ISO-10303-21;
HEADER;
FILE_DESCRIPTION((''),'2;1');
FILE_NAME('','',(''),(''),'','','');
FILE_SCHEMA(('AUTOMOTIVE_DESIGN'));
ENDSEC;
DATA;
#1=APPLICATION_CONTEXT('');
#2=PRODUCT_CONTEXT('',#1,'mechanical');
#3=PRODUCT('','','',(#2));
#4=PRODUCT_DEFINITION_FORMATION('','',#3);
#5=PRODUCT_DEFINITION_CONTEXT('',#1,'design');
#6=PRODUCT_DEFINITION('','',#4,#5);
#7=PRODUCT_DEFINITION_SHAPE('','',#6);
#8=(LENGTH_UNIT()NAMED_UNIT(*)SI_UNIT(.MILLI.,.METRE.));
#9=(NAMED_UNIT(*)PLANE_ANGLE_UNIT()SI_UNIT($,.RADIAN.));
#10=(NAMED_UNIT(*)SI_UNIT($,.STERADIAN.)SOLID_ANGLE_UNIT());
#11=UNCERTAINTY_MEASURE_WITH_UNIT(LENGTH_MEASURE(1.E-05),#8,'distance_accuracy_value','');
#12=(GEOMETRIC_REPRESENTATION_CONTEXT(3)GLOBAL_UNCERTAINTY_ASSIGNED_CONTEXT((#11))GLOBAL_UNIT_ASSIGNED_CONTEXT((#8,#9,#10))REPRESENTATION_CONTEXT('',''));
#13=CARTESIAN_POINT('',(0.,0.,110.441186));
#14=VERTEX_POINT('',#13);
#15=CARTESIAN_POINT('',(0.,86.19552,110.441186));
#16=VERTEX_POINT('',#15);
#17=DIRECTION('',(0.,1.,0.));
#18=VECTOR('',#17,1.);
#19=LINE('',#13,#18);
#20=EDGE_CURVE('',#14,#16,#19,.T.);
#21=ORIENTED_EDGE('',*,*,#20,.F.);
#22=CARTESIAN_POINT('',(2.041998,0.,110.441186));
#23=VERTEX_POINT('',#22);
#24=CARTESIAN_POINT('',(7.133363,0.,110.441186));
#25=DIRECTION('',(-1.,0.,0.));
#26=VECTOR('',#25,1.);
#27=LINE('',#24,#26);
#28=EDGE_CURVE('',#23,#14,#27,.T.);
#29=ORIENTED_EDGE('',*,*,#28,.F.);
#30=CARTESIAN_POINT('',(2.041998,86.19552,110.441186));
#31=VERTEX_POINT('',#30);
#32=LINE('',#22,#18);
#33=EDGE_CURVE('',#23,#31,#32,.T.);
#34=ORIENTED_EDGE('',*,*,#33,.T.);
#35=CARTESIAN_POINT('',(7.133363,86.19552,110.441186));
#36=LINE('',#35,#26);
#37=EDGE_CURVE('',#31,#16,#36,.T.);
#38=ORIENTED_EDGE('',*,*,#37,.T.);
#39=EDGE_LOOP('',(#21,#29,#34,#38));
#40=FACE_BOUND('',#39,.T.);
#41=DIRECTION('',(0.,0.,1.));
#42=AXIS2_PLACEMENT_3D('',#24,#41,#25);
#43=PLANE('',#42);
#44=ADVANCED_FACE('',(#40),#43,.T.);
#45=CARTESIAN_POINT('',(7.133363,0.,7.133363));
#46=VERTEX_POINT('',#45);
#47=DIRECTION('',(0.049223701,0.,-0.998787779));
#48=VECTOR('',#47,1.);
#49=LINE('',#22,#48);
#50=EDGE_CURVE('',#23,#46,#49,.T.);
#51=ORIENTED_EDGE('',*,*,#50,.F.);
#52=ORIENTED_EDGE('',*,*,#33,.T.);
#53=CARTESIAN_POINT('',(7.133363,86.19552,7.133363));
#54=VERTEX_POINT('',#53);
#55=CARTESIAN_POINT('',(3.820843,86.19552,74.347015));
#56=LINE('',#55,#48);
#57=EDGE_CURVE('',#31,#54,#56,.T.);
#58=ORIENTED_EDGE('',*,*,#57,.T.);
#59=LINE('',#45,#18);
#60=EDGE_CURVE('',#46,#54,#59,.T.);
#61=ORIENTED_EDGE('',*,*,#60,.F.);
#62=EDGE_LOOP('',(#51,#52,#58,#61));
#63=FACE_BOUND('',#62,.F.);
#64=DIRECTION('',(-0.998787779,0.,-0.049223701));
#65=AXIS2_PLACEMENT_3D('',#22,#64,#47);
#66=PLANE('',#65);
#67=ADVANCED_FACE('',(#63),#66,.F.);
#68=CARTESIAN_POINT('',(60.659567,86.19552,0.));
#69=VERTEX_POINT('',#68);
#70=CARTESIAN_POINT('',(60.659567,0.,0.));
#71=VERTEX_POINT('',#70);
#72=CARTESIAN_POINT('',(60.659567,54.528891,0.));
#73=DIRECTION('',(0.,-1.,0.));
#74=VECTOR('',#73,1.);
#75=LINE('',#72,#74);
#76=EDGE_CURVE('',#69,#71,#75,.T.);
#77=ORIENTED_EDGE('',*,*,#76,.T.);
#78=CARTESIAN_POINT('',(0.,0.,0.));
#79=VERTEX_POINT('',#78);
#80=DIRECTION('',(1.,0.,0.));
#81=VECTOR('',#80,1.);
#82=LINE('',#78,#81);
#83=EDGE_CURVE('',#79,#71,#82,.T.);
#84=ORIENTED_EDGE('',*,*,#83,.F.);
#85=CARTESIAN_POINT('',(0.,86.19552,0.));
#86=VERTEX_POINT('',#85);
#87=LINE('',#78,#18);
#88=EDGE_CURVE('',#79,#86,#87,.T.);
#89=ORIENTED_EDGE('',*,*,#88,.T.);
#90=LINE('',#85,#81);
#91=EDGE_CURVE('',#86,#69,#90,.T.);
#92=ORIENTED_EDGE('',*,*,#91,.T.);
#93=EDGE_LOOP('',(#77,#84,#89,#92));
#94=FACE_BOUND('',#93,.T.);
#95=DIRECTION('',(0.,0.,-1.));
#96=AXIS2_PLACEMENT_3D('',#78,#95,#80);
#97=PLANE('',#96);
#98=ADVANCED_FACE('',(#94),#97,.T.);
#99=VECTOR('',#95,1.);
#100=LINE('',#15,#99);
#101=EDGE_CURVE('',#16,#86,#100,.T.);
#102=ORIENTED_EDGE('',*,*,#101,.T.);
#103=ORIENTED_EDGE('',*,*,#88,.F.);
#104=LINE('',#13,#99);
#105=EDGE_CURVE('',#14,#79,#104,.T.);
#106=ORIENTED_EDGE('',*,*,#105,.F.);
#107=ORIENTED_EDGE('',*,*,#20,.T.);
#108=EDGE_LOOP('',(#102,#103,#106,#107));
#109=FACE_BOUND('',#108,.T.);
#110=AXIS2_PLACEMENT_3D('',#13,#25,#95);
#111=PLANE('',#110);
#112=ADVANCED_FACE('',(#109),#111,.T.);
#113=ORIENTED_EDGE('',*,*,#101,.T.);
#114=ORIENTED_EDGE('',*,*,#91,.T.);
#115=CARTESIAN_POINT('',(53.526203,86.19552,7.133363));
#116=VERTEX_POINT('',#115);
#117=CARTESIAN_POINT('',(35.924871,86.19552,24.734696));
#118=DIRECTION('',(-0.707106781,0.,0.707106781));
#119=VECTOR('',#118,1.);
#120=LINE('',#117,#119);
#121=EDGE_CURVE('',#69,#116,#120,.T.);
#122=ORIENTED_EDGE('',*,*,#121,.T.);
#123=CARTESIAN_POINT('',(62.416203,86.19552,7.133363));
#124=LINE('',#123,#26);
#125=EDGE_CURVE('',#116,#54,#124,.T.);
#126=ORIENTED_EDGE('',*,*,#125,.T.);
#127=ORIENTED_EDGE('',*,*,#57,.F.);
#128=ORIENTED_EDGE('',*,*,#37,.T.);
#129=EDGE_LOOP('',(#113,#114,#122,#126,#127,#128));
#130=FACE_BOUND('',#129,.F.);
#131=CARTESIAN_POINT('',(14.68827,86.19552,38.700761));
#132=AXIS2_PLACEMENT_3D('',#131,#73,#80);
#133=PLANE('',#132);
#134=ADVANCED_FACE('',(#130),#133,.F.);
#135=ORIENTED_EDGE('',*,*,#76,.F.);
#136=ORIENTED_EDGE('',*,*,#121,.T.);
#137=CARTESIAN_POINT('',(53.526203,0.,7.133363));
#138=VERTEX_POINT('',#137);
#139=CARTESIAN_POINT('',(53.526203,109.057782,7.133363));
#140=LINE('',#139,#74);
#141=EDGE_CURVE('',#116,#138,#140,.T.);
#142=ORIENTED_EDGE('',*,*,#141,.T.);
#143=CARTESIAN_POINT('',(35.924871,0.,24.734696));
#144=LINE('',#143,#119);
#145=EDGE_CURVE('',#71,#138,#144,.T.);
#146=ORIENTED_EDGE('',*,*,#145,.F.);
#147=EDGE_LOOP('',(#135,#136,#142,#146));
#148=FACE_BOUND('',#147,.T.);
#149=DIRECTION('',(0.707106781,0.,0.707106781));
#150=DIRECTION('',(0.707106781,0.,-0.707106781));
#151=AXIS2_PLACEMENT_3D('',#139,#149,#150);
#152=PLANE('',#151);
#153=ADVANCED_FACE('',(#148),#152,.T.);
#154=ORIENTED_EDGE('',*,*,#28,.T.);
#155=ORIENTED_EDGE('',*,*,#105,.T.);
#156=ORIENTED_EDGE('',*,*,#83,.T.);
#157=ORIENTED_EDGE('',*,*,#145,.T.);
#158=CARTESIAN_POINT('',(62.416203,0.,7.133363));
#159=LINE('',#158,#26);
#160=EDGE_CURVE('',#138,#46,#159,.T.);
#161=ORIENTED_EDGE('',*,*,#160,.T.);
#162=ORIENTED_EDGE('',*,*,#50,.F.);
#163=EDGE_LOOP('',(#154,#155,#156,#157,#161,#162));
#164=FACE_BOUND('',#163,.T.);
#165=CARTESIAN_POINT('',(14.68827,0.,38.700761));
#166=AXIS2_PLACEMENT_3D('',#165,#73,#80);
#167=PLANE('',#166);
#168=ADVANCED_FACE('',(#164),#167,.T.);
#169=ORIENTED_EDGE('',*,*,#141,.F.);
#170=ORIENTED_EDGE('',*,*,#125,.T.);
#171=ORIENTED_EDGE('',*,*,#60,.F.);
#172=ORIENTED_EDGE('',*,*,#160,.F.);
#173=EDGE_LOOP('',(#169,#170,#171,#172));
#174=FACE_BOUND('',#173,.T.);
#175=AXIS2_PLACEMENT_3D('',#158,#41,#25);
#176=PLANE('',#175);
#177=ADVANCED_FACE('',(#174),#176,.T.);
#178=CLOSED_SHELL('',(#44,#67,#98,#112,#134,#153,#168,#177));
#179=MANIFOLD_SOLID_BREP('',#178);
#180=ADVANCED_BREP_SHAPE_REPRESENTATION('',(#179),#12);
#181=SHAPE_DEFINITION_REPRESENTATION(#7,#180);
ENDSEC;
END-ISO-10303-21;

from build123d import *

# Parameters (mm, degrees)
F1_DEPTH    = 86.19552
F3_DEPTH    = 86.19652
F4_T1_DEPTH = 131.920043526


# Not quite as in the source:
# - a fillet or chamfer that OpenCascade refuses, or shapes differently, is made with other operations: its cross-section is extruded or revolved along the edge and cut away or added


with BuildPart() as f1:
    # F0 (on Front) → F1 (new body)
    with BuildSketch(Plane.XZ):
        Polygon((7.1333632804, 110.441185534), (0, 110.441185534), (0, 0), (62.41620332, 0), (62.41620332, 7.1333632804), (7.1333632804, 7.1333632804), align=None)
    extrude(amount=-F1_DEPTH)

    # F2 (on face) → F3 (cut, through all)
    with BuildSketch(Plane.XZ):
        Polygon((7.1333632804, 110.441185534), (7.1333632804, 7.1333632804), (25.2087078989, 24.2729913443), (25.2087078989, 110.441185534), align=None)
        Polygon((2.0419980865, 110.441185534), (7.1333632804, 7.1333632804), (7.1333632804, 110.441185534), align=None)
    extrude(amount=-F3_DEPTH, mode=Mode.SUBTRACT)

    # F4: chamfer of 8.89 on 1 edges, made by hand

    # F4_s2 → F4_t1 (cut)
    with BuildSketch(Plane.XZ.offset(-109.057781763)):
        Polygon((53.52620332, 7.1333632804), (62.41620332, -1.7566367196), (62.41620332, 7.1333632804), align=None)
    extrude(amount=F4_T1_DEPTH, mode=Mode.SUBTRACT)


solid = f1.part
